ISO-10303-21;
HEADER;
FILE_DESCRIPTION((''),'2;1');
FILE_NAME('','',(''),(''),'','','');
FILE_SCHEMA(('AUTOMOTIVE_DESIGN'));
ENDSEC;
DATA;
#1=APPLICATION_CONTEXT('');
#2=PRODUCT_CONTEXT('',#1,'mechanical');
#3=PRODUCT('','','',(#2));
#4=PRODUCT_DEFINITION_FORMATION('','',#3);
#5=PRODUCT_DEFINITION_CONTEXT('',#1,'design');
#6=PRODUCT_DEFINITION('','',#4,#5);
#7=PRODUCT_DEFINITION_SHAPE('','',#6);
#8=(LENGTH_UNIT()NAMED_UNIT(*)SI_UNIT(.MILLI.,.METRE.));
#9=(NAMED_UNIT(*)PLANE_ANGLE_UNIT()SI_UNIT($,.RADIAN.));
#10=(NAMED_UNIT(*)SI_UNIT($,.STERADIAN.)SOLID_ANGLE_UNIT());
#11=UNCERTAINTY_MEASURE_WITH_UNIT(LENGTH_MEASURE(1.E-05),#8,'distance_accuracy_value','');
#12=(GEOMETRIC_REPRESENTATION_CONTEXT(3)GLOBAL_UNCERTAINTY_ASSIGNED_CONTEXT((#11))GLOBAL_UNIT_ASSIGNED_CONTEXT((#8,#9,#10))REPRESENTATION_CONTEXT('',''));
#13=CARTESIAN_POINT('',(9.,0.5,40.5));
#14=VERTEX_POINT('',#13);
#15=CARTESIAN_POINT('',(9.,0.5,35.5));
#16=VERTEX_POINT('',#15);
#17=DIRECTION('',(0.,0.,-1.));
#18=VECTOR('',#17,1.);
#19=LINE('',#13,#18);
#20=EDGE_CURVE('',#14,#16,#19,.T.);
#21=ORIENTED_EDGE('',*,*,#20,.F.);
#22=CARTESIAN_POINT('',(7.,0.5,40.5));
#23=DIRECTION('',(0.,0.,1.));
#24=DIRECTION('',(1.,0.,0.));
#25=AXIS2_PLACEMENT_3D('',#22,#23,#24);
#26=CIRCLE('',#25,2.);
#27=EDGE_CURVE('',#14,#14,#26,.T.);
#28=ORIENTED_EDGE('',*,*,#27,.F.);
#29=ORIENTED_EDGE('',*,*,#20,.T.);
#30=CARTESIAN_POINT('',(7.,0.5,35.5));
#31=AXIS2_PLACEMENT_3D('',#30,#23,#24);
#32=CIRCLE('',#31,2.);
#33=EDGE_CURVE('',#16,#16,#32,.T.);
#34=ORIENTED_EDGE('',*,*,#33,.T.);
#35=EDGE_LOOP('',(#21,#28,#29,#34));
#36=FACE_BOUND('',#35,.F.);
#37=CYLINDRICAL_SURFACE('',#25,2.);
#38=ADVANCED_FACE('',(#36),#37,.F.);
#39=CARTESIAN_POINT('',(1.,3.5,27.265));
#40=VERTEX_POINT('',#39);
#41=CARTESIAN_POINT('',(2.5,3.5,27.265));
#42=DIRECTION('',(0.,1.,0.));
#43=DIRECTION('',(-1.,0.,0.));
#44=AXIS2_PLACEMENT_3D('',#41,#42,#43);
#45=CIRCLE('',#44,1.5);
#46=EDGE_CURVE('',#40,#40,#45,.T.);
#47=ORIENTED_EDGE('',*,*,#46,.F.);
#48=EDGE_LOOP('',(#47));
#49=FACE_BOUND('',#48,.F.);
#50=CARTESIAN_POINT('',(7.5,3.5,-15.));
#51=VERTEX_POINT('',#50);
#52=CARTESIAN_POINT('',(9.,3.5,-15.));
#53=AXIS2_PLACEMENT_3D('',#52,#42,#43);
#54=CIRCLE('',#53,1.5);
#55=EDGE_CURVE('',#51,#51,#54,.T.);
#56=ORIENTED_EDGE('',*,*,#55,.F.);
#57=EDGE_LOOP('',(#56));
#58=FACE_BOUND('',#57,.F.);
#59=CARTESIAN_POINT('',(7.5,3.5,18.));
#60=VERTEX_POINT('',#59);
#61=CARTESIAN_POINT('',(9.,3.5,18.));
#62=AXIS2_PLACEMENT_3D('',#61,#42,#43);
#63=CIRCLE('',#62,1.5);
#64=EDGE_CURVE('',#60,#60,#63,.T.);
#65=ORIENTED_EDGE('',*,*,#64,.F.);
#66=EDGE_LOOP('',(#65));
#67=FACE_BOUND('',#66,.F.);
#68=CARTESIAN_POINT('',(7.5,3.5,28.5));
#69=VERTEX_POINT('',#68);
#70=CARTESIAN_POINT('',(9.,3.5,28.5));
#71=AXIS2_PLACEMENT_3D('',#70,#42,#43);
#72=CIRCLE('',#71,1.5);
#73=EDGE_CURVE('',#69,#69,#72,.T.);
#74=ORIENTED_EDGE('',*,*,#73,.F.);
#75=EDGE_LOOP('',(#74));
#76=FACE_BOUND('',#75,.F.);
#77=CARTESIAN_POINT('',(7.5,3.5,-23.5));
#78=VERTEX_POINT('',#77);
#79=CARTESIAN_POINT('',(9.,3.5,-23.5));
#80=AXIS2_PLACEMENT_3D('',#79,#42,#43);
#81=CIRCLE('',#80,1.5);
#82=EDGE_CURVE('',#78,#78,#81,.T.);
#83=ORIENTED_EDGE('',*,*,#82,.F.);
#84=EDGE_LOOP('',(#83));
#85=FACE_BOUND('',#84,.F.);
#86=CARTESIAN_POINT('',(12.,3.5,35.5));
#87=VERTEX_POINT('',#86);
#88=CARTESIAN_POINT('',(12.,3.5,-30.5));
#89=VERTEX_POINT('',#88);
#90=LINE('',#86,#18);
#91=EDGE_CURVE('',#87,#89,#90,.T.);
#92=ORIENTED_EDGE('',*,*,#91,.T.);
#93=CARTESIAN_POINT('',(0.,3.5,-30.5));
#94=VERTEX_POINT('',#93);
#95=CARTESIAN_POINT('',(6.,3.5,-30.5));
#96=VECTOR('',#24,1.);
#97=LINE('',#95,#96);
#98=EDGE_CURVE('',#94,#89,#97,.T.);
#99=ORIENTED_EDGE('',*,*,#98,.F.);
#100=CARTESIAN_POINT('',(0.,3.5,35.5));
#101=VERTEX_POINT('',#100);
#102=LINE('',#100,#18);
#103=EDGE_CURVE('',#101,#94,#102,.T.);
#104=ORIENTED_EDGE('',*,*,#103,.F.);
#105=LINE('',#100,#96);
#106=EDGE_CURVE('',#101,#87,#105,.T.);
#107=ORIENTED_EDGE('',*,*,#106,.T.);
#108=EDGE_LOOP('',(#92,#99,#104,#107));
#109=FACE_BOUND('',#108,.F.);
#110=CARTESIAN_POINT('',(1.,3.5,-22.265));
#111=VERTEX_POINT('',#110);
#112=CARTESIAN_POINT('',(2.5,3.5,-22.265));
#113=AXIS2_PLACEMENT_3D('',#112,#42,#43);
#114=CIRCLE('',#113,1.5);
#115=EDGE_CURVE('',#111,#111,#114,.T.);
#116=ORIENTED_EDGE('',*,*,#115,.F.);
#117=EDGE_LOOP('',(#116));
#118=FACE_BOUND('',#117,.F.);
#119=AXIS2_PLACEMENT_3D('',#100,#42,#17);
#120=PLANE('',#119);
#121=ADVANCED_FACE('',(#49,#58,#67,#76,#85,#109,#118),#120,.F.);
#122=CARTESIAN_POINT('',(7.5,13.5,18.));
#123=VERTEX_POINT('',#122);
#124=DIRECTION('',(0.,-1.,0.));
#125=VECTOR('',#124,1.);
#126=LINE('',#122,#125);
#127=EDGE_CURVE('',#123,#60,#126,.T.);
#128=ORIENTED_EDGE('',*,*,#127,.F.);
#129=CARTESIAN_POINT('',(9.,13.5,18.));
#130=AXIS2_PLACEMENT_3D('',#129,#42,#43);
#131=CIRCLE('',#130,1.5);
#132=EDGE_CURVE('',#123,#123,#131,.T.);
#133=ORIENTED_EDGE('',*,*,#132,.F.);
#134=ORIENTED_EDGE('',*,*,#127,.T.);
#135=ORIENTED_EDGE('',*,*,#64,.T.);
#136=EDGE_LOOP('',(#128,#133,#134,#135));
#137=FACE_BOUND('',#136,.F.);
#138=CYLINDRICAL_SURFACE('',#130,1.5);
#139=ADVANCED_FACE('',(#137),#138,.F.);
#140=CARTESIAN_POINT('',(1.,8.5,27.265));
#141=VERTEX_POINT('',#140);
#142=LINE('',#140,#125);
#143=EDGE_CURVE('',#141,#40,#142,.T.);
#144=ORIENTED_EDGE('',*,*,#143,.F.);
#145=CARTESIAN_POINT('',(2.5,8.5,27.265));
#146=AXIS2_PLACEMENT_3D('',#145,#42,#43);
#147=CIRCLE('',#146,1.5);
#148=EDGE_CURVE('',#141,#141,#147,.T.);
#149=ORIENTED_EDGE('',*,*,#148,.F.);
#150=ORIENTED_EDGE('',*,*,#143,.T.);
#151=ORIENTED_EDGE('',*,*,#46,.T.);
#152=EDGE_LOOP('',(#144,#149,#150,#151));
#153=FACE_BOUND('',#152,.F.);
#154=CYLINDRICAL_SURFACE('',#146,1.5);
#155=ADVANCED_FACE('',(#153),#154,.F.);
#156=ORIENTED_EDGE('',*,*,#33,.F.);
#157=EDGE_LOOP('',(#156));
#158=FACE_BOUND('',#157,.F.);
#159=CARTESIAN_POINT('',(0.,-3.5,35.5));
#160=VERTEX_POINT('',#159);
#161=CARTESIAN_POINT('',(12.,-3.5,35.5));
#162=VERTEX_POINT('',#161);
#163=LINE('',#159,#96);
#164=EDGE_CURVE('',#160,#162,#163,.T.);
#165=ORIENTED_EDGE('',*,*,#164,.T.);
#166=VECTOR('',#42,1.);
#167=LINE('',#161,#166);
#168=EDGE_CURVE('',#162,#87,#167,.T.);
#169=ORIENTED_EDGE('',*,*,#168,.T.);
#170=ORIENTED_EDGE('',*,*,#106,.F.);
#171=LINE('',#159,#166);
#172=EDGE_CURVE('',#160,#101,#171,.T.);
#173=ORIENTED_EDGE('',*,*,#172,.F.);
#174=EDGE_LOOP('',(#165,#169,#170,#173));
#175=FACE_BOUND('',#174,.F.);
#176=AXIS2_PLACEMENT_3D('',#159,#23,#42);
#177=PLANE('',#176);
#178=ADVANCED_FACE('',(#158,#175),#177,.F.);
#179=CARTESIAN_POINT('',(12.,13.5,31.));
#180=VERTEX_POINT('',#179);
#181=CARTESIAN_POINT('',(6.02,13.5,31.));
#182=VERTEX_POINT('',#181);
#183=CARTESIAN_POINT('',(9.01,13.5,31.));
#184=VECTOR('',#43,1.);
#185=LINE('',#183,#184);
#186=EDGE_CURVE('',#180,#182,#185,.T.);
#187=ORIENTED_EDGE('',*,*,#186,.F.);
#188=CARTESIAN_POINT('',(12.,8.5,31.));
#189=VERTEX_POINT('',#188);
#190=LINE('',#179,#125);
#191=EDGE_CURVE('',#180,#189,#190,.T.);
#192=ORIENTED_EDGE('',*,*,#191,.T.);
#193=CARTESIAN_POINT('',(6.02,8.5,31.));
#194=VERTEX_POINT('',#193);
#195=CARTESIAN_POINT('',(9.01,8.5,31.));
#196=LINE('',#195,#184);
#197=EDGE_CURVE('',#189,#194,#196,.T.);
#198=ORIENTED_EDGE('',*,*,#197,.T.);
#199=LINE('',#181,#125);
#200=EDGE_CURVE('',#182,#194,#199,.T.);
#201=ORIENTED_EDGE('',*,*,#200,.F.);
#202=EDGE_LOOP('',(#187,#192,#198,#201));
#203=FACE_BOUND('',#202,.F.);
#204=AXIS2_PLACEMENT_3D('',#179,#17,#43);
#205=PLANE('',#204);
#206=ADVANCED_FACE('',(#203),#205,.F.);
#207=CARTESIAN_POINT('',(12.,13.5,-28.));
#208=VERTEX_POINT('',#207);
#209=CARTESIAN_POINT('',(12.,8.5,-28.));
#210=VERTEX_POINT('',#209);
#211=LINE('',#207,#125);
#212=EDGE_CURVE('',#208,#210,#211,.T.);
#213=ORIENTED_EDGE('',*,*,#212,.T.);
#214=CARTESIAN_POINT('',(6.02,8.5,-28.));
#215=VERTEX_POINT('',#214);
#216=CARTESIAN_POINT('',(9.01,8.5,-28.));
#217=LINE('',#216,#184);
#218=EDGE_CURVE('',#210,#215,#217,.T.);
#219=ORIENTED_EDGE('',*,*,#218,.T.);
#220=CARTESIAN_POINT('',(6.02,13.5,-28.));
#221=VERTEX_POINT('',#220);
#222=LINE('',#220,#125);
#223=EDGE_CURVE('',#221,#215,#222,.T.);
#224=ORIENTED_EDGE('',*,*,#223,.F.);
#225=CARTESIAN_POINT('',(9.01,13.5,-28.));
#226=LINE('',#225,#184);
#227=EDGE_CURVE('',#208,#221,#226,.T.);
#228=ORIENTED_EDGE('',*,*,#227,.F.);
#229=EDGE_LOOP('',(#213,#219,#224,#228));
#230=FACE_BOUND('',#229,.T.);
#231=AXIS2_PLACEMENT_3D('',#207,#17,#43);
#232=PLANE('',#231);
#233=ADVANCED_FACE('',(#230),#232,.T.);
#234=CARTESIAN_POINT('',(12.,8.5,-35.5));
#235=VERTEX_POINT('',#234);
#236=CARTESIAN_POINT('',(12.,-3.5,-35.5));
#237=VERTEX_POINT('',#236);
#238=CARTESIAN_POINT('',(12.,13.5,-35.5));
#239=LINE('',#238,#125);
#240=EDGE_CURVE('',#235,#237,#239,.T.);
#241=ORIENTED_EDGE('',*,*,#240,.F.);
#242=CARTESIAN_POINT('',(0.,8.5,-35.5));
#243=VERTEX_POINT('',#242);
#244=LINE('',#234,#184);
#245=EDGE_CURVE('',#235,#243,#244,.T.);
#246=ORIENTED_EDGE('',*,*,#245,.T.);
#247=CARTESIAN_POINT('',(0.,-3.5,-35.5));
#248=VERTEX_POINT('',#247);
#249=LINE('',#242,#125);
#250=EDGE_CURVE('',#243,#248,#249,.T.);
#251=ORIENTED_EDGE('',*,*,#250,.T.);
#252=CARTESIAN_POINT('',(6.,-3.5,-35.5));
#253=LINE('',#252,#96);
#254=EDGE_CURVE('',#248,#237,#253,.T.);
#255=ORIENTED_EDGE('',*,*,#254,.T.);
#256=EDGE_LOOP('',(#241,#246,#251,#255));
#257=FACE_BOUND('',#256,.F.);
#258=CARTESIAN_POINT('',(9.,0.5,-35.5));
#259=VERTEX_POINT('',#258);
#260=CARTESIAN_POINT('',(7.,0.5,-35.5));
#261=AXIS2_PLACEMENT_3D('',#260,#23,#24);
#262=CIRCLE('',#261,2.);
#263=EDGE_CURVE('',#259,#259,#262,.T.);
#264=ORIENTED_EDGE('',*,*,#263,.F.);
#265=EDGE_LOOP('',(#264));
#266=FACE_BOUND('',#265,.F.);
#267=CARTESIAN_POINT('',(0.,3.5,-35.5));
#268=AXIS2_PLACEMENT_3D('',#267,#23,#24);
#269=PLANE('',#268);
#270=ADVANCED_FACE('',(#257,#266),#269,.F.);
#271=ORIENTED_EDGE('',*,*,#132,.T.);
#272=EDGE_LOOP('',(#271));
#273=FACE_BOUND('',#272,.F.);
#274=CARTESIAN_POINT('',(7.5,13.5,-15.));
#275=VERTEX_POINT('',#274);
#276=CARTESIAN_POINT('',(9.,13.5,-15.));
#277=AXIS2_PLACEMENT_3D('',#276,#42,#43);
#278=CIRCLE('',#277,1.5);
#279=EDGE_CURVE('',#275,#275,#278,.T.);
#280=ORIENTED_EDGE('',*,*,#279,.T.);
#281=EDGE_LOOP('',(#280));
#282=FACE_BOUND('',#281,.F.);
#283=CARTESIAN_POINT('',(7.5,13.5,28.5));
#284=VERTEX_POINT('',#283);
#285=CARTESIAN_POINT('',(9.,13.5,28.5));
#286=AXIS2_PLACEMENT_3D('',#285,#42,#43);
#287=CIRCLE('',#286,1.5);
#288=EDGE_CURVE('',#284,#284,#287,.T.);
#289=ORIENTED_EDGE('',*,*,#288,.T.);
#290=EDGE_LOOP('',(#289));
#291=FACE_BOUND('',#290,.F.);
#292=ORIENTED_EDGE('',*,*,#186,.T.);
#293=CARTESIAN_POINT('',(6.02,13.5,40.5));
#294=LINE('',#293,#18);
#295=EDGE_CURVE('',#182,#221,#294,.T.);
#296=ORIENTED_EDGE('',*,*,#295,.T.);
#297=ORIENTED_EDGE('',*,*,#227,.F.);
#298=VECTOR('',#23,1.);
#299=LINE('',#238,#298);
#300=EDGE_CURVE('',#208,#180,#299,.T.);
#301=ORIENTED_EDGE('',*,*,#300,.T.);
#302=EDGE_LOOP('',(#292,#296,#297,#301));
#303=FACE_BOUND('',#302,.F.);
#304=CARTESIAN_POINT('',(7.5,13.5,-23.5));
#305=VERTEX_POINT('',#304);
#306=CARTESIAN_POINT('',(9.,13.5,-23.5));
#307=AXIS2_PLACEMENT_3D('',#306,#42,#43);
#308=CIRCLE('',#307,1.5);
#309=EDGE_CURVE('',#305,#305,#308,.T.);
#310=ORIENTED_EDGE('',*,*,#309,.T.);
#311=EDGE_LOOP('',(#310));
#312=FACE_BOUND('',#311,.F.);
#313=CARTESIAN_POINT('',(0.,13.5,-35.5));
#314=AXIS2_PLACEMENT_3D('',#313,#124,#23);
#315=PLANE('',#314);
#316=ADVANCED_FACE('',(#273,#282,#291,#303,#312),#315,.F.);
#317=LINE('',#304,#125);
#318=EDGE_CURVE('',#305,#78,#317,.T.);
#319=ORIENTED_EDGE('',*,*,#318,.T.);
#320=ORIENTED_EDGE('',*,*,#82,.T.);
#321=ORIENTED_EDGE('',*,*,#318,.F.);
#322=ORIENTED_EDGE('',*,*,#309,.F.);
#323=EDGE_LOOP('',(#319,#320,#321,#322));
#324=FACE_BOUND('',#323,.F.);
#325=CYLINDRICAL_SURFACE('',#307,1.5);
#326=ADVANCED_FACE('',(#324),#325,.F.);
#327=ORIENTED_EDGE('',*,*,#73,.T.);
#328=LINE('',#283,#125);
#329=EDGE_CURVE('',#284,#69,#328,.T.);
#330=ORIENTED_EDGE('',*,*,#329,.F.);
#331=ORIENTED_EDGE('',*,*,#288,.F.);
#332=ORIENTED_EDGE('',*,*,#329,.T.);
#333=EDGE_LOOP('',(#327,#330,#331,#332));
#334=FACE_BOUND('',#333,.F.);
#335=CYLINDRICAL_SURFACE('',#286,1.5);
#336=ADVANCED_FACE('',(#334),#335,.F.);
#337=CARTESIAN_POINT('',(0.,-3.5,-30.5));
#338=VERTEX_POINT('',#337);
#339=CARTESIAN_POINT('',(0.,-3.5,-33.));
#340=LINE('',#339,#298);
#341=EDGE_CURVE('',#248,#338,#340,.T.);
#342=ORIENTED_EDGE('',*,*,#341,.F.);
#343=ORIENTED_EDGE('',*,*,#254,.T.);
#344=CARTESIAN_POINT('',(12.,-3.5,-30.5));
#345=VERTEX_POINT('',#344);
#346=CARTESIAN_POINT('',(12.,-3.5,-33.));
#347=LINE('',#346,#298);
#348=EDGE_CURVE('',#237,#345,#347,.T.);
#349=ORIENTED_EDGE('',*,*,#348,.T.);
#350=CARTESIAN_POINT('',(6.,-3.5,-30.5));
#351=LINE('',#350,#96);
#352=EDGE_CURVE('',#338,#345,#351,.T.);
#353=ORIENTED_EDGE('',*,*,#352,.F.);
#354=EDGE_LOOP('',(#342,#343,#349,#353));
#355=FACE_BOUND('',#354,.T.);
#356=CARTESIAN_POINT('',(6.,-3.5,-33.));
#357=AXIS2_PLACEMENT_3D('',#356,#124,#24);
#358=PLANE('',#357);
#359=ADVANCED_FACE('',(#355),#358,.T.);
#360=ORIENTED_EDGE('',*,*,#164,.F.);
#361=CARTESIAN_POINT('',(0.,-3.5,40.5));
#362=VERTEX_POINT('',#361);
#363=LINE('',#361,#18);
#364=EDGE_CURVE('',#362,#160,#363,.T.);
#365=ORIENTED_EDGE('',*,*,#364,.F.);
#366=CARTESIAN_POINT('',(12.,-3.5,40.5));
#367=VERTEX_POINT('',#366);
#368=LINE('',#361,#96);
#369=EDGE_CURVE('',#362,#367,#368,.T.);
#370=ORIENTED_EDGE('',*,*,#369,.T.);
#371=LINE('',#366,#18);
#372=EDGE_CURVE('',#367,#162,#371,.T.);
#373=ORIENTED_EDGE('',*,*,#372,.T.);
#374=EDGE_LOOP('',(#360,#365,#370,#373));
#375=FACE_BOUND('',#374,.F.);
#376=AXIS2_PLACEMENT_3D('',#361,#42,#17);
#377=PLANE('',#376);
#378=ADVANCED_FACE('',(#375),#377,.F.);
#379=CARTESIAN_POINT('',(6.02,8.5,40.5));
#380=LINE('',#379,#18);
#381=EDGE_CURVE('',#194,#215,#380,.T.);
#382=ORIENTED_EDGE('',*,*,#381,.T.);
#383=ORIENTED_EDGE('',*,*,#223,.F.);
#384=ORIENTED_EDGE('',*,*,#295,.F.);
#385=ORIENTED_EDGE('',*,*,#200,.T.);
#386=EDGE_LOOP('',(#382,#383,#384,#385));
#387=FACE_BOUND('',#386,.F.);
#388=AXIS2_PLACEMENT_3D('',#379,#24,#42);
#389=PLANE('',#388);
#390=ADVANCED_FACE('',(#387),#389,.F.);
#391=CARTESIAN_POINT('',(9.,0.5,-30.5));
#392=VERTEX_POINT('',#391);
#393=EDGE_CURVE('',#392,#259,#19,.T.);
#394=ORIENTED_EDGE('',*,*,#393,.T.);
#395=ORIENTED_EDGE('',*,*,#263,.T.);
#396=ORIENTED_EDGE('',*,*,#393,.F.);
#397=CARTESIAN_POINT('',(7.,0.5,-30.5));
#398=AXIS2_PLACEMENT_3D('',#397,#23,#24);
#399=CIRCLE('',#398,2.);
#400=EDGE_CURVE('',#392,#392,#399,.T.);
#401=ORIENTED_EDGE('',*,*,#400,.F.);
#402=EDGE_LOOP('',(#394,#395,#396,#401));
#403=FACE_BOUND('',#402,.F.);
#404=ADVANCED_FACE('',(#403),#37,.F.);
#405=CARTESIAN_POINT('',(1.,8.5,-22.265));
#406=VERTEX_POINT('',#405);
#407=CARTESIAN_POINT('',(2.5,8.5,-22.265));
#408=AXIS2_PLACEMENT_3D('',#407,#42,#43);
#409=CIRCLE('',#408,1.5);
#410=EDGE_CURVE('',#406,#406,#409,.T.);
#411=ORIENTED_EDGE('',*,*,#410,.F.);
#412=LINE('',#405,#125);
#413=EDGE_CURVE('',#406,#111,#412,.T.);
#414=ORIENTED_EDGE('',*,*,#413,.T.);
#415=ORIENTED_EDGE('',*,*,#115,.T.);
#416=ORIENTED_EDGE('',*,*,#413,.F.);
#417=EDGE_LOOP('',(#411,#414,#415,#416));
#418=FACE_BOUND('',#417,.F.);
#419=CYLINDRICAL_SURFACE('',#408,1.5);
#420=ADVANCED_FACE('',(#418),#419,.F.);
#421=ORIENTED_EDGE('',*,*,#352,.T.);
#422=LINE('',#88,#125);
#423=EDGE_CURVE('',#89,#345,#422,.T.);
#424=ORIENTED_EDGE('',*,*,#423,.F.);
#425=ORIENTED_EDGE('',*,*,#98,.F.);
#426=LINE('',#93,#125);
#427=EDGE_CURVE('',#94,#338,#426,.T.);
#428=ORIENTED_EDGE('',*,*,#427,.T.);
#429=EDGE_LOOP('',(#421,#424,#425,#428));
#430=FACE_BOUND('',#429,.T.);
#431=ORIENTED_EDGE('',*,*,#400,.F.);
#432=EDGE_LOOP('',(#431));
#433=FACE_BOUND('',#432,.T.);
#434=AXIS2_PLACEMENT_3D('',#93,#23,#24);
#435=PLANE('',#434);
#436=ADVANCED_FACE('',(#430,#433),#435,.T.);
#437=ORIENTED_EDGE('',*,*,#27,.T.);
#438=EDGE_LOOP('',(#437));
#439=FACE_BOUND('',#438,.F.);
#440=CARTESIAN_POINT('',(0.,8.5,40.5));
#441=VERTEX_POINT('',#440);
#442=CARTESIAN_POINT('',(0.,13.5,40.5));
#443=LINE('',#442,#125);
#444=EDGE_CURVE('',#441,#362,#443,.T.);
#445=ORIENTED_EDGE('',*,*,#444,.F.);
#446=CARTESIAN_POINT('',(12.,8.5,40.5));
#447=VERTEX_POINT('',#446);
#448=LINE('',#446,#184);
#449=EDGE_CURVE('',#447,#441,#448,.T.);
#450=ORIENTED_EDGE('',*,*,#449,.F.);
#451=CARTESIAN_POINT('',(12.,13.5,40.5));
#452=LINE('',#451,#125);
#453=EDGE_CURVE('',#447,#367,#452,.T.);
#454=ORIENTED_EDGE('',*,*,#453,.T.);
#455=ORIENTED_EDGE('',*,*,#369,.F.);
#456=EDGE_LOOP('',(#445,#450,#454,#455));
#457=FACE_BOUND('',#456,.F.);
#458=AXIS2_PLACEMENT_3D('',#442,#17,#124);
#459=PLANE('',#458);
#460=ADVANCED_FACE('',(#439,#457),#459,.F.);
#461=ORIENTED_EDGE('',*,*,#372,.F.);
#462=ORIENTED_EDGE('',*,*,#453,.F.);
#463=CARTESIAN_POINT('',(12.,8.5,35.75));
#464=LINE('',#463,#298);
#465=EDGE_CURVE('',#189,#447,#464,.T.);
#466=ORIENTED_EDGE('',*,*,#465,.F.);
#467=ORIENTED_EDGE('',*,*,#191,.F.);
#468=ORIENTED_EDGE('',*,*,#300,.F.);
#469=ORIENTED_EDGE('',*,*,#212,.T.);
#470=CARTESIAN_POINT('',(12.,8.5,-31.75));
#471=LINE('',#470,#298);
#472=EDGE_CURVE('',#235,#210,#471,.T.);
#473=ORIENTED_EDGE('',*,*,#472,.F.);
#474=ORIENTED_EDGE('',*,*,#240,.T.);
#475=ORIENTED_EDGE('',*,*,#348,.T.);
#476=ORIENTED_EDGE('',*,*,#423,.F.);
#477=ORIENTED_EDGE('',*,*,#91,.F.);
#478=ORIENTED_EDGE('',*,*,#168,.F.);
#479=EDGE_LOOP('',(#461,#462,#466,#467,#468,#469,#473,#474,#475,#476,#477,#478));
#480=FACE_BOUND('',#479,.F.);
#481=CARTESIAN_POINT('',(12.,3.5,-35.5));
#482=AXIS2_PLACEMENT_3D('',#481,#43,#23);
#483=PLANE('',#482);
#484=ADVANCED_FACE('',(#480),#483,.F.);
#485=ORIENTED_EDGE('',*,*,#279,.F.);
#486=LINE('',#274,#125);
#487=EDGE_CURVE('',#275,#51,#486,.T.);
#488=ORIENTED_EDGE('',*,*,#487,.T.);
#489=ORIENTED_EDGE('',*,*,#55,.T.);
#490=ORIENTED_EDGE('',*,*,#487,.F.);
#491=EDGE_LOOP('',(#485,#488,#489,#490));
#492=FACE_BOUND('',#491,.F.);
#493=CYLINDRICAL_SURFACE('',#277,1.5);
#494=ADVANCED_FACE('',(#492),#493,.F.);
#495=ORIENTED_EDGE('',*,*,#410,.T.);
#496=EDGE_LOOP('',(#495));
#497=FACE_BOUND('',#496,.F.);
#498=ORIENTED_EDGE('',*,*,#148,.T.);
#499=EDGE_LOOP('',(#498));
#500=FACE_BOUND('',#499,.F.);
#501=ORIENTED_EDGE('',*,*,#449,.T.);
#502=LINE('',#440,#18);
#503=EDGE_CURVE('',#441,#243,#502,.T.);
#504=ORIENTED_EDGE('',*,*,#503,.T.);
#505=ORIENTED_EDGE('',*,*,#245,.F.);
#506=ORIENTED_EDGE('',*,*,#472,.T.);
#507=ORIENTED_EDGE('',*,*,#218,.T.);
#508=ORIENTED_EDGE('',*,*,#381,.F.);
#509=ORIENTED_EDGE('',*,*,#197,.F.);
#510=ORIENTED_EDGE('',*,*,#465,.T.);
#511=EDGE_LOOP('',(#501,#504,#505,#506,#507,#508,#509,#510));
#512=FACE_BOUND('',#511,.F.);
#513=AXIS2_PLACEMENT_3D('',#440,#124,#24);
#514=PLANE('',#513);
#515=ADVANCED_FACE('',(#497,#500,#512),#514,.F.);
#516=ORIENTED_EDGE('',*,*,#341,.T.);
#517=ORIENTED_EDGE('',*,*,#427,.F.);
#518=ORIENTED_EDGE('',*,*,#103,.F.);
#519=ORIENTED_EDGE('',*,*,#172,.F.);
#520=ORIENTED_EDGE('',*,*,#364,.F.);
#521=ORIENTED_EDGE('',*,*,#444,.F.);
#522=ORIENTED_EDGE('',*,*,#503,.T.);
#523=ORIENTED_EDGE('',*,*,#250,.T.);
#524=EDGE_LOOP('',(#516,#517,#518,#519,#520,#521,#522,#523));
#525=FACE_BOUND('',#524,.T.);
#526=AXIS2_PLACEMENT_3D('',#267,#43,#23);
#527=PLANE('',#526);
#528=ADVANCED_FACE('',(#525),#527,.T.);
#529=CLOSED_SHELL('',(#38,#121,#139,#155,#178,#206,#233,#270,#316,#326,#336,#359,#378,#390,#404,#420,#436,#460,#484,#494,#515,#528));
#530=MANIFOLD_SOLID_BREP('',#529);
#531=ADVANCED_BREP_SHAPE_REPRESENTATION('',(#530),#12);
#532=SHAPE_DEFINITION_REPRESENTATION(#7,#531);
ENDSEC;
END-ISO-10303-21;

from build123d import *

# Parameters (mm, degrees)
F1_DEPTH  = 12
F2_W      = 6.02
F2_H      = 5
F3_DEPTH  = 76
F4_R      = 1.5
F5_DEPTH  = 25
F6_R      = 1.5
F7_DEPTH  = 25
F8_W      = 12
F8_H      = 5
F9_DEPTH  = 7
F10_R     = 2
F11_DEPTH = 76
F12_W     = 5.98
F12_H     = 9.5
F12_H_2   = 7.5
F13_DEPTH = 5
F14_R     = 1.5
F15_DEPTH = 25


# Not quite as in the source:
# - a feature names something its author has since deleted; it is built from what else it names


with BuildPart() as f1:
    # F0 (on Right) → F1 (new body)
    with BuildSketch(Plane.YZ):
        Polygon((13.5, 40.5), (-3.5, 40.5), (-3.5, 35.5), (3.5, 35.5), (3.5, -35.5), (13.5, -35.5), align=None)
    extrude(amount=F1_DEPTH)

    # F2 (on face) → F3 (cut)
    with BuildSketch(Plane.XY.offset(40.5)):
        with Locations((3.01, 11)):
            Rectangle(F2_W, F2_H)
    extrude(amount=-F3_DEPTH, mode=Mode.SUBTRACT)

    # F4 (on face) → F5 (cut)
    with BuildSketch(Plane(origin=(0, 13.5, 0), x_dir=(-1, 0, 0), z_dir=(0, 1, 0))):
        with Locations((-9, 28.5)):
            Circle(F4_R)
        with Locations((-9, -23.5)):
            Circle(F4_R)
    extrude(amount=-F5_DEPTH, mode=Mode.SUBTRACT)

    # F6 (on face) → F7 (cut)
    with BuildSketch(Plane(origin=(0, 8.5, 0), x_dir=(-1, 0, 0), z_dir=(0, 1, 0))):
        with Locations((-2.5, -22.265)):
            Circle(F6_R)
        with Locations((-2.5, 27.265)):
            Circle(F6_R)
    extrude(amount=-F7_DEPTH, mode=Mode.SUBTRACT)

    # F8 (on face) → F9 (join)
    with BuildSketch(Plane.XZ.offset(-3.5)):
        with Locations((6, -33)):
            Rectangle(F8_W, F8_H)
    extrude(amount=F9_DEPTH)

    # F10 (on face) → F11 (cut)
    with BuildSketch(Plane.XY.offset(40.5)):
        with Locations((7, 0.5)):
            Circle(F10_R)
    extrude(amount=-F11_DEPTH, mode=Mode.SUBTRACT)

    # F12 (on face) → F13 (cut)
    with BuildSketch(Plane(origin=(0, 13.5, 0), x_dir=(-1, 0, 0), z_dir=(0, 1, 0))):
        with Locations((-9.01, 35.75)):
            Rectangle(F12_W, F12_H)
        with Locations((-9.01, -31.75)):
            Rectangle(F12_W, F12_H_2)
    extrude(amount=-F13_DEPTH, mode=Mode.SUBTRACT)

    # F14 (on face) → F15 (cut)
    with BuildSketch(Plane(origin=(0, 13.5, 0), x_dir=(-1, 0, 0), z_dir=(0, 1, 0))):
        with Locations((-9, -15)):
            Circle(F14_R)
        with Locations((-9, 18)):
            Circle(F14_R)
    extrude(amount=-F15_DEPTH, mode=Mode.SUBTRACT)


solid = f1.part
